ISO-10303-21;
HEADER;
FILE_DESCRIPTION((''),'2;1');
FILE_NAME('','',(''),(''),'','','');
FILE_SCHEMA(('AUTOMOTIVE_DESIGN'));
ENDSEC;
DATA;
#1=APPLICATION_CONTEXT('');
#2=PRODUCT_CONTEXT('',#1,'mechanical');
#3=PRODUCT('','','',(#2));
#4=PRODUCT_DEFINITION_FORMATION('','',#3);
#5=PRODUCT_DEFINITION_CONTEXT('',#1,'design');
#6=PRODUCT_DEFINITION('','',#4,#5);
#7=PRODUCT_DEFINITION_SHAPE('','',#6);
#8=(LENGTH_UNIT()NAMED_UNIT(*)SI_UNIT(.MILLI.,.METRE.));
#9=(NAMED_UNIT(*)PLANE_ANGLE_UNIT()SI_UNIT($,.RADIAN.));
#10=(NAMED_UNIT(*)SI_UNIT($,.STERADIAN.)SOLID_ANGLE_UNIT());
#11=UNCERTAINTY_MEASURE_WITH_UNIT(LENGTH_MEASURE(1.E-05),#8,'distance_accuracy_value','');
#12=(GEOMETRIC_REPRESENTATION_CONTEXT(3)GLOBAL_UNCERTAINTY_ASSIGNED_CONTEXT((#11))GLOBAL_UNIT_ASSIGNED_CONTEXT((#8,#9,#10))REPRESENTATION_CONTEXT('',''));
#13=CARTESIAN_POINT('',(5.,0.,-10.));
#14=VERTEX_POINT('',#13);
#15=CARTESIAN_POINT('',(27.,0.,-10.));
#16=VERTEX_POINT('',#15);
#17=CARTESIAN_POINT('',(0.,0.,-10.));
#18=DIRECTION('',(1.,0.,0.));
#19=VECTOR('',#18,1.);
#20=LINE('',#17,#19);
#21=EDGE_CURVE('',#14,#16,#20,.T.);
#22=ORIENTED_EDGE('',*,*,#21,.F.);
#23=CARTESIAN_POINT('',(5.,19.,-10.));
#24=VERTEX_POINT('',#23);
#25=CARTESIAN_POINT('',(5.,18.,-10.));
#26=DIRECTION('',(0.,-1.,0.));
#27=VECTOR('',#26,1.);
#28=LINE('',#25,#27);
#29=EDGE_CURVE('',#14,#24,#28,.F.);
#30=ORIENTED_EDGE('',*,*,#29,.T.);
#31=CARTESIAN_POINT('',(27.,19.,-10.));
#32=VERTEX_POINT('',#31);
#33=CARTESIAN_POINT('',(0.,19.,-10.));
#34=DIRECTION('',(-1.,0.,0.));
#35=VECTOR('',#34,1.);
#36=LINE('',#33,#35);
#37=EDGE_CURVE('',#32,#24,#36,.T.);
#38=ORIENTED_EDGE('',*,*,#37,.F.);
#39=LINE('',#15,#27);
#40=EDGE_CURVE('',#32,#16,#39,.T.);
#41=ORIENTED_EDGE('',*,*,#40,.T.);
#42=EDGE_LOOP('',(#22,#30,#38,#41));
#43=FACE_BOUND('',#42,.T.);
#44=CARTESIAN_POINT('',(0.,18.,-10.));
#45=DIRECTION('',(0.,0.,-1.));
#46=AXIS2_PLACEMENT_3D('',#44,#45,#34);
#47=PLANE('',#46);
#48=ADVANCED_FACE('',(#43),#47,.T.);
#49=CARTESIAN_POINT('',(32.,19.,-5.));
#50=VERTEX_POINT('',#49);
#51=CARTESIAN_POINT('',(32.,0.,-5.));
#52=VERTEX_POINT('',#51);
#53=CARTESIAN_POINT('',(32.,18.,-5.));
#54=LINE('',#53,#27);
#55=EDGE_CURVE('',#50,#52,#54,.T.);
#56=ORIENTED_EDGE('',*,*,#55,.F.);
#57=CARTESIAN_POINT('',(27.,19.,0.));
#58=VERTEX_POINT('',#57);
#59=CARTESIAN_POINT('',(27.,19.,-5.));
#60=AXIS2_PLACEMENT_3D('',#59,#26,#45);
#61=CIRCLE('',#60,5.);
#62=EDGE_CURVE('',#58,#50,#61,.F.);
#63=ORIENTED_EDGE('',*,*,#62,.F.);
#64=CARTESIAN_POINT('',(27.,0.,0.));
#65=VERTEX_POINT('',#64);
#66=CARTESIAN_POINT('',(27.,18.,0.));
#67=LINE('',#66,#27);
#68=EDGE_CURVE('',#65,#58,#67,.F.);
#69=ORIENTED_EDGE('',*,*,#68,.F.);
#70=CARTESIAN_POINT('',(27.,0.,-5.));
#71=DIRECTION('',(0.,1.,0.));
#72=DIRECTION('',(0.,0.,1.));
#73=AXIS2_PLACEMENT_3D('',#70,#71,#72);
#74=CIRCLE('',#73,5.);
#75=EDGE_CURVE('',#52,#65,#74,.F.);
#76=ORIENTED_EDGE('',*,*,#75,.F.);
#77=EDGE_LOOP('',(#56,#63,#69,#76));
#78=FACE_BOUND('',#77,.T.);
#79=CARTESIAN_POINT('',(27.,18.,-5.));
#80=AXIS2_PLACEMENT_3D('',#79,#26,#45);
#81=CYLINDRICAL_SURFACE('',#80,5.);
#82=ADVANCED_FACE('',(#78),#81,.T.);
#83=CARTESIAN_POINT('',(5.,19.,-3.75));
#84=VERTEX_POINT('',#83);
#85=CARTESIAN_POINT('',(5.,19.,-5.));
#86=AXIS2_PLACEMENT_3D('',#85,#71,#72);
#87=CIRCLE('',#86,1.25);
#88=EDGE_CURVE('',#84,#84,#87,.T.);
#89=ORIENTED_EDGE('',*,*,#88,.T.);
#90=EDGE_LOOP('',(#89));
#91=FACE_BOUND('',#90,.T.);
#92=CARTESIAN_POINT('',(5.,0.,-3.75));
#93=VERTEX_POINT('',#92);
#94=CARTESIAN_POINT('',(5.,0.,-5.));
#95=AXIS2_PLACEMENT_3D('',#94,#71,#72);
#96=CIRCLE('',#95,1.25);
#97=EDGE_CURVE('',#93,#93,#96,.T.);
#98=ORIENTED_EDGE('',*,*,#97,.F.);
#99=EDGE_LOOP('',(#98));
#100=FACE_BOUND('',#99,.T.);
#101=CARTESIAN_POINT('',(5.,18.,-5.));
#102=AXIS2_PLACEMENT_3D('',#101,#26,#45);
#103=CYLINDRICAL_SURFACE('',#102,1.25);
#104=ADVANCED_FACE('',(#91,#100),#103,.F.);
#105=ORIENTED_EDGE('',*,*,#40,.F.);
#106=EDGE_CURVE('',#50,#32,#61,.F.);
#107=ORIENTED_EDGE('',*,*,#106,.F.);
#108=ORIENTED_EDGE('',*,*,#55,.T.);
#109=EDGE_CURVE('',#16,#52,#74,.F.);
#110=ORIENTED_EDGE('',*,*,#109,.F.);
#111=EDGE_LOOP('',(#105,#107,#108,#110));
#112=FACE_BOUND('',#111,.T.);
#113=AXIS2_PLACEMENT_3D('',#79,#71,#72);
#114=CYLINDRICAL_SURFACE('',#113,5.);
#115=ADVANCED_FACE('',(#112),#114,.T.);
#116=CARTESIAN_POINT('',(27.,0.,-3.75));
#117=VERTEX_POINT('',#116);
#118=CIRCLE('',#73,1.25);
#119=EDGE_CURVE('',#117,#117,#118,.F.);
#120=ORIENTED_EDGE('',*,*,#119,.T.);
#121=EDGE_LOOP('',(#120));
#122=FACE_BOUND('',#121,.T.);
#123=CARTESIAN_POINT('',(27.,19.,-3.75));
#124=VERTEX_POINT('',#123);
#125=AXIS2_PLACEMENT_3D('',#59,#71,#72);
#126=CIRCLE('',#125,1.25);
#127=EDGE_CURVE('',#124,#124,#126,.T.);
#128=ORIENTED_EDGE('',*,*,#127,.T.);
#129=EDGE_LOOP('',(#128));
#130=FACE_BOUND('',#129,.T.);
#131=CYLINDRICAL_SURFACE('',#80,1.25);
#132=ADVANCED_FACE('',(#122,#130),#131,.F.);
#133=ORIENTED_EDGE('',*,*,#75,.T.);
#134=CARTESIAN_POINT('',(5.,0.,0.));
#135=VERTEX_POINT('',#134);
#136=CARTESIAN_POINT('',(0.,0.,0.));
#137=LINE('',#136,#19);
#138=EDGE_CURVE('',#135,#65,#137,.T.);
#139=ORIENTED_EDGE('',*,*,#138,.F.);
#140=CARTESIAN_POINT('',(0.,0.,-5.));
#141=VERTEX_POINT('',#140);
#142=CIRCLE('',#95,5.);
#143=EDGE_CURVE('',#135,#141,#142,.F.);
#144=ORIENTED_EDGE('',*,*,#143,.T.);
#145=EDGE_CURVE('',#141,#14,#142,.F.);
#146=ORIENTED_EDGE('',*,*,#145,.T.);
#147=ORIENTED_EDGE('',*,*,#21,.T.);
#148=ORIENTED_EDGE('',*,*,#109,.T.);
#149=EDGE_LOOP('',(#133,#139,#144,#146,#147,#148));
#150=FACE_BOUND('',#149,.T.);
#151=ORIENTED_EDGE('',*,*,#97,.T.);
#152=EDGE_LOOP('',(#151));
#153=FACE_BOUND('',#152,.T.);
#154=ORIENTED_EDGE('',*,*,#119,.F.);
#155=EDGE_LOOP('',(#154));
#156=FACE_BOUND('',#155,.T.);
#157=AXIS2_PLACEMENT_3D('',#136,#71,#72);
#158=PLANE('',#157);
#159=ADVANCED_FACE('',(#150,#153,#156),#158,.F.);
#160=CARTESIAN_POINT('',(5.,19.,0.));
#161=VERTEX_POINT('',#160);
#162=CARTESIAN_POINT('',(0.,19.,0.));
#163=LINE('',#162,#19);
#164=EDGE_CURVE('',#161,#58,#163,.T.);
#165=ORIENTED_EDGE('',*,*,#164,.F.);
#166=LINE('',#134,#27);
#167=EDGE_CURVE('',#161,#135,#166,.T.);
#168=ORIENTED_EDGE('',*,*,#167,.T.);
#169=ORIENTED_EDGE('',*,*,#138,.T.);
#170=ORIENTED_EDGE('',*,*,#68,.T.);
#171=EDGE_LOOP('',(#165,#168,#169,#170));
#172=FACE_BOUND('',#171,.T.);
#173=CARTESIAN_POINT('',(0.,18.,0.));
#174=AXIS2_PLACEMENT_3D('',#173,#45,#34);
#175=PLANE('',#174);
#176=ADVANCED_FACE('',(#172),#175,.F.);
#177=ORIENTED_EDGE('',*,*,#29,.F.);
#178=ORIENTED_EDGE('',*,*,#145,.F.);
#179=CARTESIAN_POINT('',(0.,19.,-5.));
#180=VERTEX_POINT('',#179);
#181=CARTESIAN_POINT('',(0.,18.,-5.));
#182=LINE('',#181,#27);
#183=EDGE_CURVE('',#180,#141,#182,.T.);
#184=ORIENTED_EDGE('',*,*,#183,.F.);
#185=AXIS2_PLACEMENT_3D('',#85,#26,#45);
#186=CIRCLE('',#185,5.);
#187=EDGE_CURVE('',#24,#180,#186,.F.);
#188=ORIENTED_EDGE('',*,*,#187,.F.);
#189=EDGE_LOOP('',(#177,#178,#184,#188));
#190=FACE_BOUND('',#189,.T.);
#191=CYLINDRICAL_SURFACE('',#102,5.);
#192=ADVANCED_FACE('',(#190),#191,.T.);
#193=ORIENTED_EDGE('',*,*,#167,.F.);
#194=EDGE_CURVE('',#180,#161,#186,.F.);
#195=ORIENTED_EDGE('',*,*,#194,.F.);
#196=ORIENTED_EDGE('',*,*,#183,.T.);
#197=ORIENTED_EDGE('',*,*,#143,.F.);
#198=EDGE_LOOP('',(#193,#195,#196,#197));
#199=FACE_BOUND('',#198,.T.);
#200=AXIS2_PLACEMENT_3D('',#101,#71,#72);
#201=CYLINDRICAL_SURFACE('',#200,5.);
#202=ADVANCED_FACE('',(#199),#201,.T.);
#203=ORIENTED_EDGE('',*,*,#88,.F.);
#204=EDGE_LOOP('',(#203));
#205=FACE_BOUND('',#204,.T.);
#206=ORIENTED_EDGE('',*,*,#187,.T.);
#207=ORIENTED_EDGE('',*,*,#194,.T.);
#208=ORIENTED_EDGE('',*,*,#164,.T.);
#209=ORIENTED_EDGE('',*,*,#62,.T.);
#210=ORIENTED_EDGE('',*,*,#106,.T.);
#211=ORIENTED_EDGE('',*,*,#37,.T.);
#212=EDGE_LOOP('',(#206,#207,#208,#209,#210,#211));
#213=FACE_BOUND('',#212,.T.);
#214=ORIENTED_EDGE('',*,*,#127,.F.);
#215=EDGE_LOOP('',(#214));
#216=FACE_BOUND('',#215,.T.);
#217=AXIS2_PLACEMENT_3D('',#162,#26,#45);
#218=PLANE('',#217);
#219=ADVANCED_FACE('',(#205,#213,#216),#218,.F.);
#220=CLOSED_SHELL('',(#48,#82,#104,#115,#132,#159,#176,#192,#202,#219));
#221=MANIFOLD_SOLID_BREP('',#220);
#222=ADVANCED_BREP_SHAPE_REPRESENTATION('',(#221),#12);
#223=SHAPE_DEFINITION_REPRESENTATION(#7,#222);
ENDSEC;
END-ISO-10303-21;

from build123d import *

# Parameters (mm, degrees)
SKETCH_1_W      = 32
SKETCH_1_H      = 10
SKETCH_1_R      = 1.25
EXTRUDE_1_DEPTH = 18
SKETCH_4_W      = 32
SKETCH_4_H      = 10
SKETCH_4_R      = 1.25
EXTRUDE_3_DEPTH = 1
FILLET_3_R      = 5
FILLET_4_R      = 5


with BuildPart() as part:
    # 草图1 → 凸台-拉伸1 (new body)
    with BuildSketch(Plane(origin=(0, 0, 0), x_dir=(1, 0, 0), z_dir=(0, 1, 0))):
        with Locations((16, 5)):
            Rectangle(SKETCH_1_W, SKETCH_1_H)
        with Locations(Location((5, 5, 0), (0, 0, 270))):
            Circle(SKETCH_1_R, mode=Mode.SUBTRACT)
        with Locations(Location((27, 5, 0), (0, 0, 270))):
            Circle(SKETCH_1_R, mode=Mode.SUBTRACT)
    extrude(amount=EXTRUDE_1_DEPTH)

    # 草图4 → 凸台-拉伸3 (add)
    with BuildSketch(Plane(origin=(0, 18, 0), x_dir=(1, 0, 0), z_dir=(0, 1, 0))):
        with Locations((16, 5)):
            Rectangle(SKETCH_4_W, SKETCH_4_H)
        with Locations(Location((5, 5, 0), (0, 0, 270))):
            Circle(SKETCH_4_R, mode=Mode.SUBTRACT)
        with Locations(Location((27, 5, 0), (0, 0, 270))):
            Circle(SKETCH_4_R, mode=Mode.SUBTRACT)
    extrude(amount=EXTRUDE_3_DEPTH)

    # 圆角3
    fillet_3_edges = [part.edges().sort_by_distance(p)[0] for p in [
        (0, 9.5, -10),
    ]]
    fillet(fillet_3_edges, radius=FILLET_3_R)

    # 圆角4
    fillet_4_edges = [part.edges().sort_by_distance(p)[0] for p in [
        (32, 9.5, -10),
        (32, 9.5, 0),
        (0, 9.5, 0),
    ]]
    fillet(fillet_4_edges, radius=FILLET_4_R - 0.0001)  # a hair under: the kernel refuses the full size


solid = part.part
